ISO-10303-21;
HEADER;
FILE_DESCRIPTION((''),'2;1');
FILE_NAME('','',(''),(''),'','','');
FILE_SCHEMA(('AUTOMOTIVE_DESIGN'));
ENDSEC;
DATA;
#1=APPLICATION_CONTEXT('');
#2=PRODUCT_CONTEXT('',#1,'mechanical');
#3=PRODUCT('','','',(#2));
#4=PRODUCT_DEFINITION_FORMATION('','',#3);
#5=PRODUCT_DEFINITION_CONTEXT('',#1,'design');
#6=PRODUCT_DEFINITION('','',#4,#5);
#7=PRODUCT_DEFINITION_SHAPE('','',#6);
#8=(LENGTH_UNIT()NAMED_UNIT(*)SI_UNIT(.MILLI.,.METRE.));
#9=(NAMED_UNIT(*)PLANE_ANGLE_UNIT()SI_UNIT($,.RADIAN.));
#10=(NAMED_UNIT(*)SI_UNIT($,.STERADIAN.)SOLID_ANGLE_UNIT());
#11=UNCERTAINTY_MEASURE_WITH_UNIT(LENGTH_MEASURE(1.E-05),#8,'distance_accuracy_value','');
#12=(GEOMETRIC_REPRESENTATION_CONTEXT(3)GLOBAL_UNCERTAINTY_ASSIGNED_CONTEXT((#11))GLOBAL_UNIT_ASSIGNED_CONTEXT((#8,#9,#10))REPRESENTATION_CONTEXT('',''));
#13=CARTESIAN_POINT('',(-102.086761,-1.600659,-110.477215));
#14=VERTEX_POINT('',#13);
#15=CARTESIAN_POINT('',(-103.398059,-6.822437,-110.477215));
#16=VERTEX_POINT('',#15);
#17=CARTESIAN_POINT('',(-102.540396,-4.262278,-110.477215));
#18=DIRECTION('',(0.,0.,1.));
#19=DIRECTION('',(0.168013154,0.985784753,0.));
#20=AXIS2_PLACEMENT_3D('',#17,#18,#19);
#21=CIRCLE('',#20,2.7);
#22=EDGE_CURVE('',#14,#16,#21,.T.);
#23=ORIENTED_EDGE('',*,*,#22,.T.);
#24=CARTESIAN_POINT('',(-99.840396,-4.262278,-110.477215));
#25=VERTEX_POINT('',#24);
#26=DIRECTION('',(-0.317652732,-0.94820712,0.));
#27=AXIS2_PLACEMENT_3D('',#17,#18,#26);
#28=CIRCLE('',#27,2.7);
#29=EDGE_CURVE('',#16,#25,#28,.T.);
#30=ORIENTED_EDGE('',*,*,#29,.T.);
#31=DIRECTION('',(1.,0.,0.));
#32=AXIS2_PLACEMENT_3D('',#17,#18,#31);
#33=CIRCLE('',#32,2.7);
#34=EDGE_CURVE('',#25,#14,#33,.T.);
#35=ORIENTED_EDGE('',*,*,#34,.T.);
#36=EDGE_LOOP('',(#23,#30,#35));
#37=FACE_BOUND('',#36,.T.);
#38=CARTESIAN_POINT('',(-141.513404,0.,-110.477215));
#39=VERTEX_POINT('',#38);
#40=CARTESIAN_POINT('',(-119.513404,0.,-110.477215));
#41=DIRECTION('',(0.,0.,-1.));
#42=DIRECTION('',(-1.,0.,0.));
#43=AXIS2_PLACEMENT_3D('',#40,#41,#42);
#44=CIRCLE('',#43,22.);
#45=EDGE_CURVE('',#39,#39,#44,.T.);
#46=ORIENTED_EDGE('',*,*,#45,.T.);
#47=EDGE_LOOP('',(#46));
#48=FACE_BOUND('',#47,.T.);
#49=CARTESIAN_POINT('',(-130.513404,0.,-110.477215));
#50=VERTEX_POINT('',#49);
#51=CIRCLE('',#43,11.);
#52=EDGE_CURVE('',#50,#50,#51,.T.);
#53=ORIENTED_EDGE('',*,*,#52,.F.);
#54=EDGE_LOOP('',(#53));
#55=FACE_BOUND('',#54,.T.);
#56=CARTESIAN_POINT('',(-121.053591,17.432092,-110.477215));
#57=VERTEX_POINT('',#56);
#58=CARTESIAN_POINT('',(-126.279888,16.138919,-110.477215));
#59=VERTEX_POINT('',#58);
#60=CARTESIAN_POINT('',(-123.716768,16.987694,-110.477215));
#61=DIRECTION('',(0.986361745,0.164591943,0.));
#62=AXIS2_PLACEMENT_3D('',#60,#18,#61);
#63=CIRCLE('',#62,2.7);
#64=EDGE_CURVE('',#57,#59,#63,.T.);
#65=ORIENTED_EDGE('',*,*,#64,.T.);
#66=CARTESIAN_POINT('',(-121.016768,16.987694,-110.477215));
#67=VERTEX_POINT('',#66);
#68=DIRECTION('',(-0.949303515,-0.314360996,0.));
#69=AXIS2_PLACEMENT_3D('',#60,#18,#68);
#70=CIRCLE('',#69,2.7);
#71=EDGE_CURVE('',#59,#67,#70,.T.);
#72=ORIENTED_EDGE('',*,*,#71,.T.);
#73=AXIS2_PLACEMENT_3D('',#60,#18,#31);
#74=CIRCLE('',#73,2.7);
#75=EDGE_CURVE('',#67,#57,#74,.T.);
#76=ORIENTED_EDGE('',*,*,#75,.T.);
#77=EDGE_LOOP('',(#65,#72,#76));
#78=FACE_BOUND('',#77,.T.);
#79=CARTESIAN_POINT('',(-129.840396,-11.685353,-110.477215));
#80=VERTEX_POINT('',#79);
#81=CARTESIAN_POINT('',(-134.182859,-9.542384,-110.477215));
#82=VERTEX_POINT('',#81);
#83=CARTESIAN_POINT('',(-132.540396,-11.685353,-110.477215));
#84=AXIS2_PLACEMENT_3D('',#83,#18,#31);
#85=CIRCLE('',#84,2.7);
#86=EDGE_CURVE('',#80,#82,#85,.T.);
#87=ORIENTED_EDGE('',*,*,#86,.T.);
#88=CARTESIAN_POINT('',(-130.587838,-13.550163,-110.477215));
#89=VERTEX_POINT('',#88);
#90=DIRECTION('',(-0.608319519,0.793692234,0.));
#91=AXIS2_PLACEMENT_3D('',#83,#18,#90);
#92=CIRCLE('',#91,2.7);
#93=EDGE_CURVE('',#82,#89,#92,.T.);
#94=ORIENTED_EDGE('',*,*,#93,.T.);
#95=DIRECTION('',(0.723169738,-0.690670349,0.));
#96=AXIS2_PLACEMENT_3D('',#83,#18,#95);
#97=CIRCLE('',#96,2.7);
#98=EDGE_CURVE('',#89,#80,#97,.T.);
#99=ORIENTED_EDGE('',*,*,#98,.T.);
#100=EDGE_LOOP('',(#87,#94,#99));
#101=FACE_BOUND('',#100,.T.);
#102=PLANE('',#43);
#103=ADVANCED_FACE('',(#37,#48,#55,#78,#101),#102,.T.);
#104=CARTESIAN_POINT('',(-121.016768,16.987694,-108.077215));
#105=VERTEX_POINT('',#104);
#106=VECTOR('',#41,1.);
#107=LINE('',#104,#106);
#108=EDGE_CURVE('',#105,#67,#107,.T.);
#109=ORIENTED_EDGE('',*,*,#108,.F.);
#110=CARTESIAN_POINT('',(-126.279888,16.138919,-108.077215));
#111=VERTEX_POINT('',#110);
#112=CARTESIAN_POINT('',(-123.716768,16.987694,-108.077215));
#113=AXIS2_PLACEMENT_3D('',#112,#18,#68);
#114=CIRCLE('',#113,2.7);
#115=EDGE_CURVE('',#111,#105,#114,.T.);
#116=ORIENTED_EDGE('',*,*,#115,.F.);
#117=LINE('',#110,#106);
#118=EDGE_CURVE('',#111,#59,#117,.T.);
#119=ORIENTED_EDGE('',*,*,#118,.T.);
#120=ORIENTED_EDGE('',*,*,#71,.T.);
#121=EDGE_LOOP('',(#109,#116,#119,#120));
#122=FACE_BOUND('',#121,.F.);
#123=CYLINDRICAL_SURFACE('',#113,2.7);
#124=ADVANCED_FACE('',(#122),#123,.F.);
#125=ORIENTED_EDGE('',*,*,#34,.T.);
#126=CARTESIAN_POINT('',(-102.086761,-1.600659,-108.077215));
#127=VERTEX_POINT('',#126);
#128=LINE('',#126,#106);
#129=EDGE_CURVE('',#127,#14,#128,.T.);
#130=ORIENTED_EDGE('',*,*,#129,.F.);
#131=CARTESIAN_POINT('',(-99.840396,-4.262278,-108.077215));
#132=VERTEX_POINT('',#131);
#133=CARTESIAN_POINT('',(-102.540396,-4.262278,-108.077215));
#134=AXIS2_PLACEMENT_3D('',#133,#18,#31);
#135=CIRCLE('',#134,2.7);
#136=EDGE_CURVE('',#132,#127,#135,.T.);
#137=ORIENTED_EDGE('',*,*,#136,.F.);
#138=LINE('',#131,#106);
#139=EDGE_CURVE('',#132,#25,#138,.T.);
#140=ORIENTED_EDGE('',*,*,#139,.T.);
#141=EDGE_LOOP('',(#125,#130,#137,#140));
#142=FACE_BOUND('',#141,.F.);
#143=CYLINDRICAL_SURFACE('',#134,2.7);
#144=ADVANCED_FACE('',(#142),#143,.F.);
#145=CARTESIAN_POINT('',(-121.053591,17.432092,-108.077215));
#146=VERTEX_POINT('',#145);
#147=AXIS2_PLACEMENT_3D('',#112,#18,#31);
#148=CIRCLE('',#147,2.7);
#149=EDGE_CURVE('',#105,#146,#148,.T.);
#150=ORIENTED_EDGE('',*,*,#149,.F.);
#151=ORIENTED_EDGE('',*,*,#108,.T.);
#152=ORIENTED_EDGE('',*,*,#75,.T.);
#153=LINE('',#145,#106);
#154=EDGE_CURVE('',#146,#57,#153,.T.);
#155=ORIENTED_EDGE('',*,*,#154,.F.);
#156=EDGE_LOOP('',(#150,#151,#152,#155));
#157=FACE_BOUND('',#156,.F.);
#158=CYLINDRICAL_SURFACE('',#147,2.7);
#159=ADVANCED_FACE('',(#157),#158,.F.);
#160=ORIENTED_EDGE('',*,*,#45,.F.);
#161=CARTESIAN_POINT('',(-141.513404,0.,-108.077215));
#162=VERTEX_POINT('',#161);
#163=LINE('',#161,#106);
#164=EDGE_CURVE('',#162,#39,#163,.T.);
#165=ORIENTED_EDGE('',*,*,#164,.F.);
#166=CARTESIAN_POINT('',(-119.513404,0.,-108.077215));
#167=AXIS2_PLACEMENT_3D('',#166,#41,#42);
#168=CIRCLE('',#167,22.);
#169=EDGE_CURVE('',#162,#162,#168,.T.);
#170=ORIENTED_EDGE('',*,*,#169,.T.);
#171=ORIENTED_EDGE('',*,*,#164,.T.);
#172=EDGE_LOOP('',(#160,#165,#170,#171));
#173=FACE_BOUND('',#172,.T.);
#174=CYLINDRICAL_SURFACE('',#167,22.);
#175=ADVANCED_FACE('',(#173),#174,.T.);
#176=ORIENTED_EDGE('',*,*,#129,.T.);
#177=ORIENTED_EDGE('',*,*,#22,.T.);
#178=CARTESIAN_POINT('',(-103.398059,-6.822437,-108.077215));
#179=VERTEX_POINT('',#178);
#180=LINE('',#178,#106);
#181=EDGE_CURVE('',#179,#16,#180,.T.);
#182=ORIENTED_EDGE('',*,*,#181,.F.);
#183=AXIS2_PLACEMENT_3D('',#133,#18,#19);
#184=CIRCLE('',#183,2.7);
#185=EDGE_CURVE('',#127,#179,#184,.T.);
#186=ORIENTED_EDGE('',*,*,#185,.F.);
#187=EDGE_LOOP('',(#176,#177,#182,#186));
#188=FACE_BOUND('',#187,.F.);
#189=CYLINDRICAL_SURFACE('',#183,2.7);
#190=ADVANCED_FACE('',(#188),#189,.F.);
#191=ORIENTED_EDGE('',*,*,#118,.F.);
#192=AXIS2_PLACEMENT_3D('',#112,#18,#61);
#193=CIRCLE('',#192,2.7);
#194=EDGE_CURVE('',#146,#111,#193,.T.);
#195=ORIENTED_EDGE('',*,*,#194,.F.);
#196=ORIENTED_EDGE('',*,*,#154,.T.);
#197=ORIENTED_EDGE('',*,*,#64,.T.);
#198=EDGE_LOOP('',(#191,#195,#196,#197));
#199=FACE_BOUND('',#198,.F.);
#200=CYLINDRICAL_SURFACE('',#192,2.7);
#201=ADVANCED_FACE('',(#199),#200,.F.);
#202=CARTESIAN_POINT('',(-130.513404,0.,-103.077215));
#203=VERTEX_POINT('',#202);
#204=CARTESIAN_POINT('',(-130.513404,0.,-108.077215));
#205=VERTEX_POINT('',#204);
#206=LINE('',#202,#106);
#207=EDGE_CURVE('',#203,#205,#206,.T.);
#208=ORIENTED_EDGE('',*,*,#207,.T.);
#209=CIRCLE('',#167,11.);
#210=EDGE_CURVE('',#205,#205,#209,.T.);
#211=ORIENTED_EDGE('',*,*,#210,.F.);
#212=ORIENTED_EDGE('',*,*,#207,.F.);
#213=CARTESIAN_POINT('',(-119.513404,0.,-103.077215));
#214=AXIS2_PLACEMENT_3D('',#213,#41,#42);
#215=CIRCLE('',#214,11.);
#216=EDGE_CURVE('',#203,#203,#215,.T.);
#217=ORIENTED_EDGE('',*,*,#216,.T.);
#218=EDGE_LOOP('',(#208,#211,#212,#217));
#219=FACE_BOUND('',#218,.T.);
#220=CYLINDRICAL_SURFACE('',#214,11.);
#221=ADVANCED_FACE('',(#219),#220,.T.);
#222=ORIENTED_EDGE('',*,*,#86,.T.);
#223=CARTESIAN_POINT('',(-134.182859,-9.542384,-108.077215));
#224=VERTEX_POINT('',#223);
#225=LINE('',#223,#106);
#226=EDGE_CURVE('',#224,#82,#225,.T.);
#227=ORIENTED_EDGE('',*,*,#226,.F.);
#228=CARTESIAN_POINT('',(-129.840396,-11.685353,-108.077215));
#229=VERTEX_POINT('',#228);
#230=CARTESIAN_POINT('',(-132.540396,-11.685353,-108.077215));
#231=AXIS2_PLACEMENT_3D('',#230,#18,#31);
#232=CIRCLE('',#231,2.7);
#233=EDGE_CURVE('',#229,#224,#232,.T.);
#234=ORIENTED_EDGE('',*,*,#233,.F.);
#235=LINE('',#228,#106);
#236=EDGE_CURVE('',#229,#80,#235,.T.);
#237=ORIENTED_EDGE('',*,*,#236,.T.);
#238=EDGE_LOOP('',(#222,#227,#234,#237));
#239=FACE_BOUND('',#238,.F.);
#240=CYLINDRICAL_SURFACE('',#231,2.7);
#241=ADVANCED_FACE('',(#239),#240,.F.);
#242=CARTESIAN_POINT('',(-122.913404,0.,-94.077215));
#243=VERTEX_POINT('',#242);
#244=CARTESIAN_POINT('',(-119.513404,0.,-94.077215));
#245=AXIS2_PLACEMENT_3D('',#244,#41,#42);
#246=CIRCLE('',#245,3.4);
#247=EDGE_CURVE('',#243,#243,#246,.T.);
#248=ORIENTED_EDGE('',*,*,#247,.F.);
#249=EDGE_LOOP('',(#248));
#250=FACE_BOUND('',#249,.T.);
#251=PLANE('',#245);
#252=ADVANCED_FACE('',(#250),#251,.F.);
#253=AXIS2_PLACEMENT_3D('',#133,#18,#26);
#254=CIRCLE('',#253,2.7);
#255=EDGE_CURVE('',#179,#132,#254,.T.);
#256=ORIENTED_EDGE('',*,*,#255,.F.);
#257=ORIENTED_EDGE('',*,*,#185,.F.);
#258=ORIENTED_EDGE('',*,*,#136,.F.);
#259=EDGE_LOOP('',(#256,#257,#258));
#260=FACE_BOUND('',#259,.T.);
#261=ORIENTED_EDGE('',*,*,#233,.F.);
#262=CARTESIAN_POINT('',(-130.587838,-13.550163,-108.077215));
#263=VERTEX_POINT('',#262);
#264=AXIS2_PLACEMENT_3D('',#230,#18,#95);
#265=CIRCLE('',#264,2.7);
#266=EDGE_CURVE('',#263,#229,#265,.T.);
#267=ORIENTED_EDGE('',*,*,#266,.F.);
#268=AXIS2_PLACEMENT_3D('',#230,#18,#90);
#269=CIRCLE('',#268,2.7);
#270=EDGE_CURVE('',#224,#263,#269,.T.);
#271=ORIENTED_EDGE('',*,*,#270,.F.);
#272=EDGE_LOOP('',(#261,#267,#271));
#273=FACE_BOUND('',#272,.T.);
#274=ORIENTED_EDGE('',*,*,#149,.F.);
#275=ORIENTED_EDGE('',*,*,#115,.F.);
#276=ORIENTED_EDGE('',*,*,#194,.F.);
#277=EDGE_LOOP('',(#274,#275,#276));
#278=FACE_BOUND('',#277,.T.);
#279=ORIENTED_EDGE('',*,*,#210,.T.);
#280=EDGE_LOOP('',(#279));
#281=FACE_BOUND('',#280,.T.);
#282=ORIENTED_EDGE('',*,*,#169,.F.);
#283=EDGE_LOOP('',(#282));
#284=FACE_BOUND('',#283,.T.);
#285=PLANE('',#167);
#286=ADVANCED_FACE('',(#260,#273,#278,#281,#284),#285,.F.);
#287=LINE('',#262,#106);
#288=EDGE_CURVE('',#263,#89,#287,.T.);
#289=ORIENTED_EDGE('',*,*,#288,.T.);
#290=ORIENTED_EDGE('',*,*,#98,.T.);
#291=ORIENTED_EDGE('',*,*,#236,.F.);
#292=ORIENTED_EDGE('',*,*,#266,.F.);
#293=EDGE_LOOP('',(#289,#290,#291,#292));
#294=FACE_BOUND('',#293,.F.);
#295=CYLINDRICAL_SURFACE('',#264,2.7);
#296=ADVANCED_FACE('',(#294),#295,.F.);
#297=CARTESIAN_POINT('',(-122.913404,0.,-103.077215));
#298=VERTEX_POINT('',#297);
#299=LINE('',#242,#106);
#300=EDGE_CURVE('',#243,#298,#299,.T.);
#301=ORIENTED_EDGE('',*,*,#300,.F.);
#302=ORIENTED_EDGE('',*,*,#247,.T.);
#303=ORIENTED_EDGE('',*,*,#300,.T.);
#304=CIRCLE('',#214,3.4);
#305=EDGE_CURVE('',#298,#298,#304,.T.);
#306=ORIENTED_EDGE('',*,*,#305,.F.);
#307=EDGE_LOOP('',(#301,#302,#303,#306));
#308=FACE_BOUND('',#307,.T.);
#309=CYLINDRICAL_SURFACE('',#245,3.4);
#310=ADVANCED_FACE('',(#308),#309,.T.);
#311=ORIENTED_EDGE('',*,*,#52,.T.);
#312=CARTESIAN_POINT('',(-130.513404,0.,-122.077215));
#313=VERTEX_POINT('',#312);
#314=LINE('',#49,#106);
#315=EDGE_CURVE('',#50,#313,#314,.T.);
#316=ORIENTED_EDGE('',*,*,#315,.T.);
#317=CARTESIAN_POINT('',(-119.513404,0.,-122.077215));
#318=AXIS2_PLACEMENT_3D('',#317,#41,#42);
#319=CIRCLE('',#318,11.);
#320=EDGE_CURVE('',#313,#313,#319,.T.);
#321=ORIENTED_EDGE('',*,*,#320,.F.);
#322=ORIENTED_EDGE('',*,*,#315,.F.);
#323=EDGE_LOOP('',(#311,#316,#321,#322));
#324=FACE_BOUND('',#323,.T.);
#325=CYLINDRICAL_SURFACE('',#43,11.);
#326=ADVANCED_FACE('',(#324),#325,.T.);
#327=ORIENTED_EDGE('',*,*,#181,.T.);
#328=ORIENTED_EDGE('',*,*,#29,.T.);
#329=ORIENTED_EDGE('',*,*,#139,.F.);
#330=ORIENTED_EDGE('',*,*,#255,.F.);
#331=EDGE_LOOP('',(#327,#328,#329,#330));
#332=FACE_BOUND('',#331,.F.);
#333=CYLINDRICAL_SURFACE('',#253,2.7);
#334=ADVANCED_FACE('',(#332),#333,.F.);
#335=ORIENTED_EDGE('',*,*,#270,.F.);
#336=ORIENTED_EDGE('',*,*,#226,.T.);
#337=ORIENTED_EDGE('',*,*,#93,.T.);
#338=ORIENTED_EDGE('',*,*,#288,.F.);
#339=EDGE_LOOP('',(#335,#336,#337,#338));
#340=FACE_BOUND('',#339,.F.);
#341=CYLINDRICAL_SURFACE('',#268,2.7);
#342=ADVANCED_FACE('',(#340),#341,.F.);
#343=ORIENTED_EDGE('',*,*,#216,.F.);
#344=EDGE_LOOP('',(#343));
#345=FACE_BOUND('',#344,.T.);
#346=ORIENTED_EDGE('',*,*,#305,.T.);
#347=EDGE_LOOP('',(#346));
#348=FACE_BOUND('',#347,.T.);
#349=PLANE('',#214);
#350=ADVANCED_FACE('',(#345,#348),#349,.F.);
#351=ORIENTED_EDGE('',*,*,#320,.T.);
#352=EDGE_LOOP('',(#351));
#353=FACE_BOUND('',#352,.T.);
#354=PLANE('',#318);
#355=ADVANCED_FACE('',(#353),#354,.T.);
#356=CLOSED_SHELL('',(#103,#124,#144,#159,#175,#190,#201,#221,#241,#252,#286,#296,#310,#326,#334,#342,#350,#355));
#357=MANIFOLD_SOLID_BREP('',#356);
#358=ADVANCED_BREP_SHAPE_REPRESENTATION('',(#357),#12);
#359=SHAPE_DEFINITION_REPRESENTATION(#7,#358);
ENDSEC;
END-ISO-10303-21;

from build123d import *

# Parameters (mm, degrees)
F3_DEPTH = 2.4


with BuildPart() as f1:
    # F0 (on Front) → F1 (revolve)
    with BuildSketch(Plane.XZ):
        Polygon((-130.5134040415, -110.4772146098), (-130.5134040415, -122.0772146098), (-119.5134040415, -122.0772146098), (-119.5134040415, -94.0772146098), (-122.9134040415, -94.0772146098), (-122.9134040415, -103.0772146098), (-130.5134040415, -103.0772146098), (-130.5134040415, -108.0772146098), (-141.5134040415, -108.0772146098), (-141.5134040415, -110.4772146098), align=None)
    revolve(axis=Axis((-119.5134040415, 0, -108.0772146098), (0, 0, -1)))

    # F2 (on face) → F3 (cut, through all)
    with BuildSketch(Plane.XY.offset(-108.0772146098)):
        with BuildLine():
            ThreePointArc((-121.0167680789, 16.9876935094), (-121.0259896486, 17.2106541317), (-121.0535913671, 17.4320917564))
            ThreePointArc((-121.0535913671, 17.4320917564), (-123.7167680789, 16.9876935094), (-126.27988757, 16.1389188194))
            ThreePointArc((-126.27988757, 16.1389188194), (-123.2868975321, 14.3221332844), (-121.0167680789, 16.9876935094))
        make_face()
        with BuildLine():
            ThreePointArc((-126.27988757, 16.1389188194), (-123.7167680789, 16.9876935094), (-121.0535913671, 17.4320917564))
            ThreePointArc((-121.0535913671, 17.4320917564), (-124.3652871018, 19.6086519366), (-126.27988757, 16.1389188194))
        make_face()
        with BuildLine():
            ThreePointArc((-99.8403964321, -4.2622778759), (-100.4770477105, -2.5208439688), (-102.0867609158, -1.6006590418))
            ThreePointArc((-102.0867609158, -1.6006590418), (-102.5403964321, -4.2622778759), (-103.3980588072, -6.8224370996))
            ThreePointArc((-103.3980588072, -6.8224370996), (-100.9633245271, -6.4538171082), (-99.8403964321, -4.2622778759))
        make_face()
        with BuildLine():
            ThreePointArc((-103.3980588072, -6.8224370996), (-102.5403964321, -4.2622778759), (-102.0867609158, -1.6006590418))
            ThreePointArc((-102.0867609158, -1.6006590418), (-105.1590890347, -3.6046692894), (-103.3980588072, -6.8224370996))
        make_face()
        with BuildLine():
            ThreePointArc((-129.8403964321, -11.6853527655), (-131.3455427368, -9.2641289744), (-134.1828591335, -9.5423837329))
            ThreePointArc((-134.1828591335, -9.5423837329), (-132.5403964321, -11.6853527655), (-130.5878381405, -13.550162707))
            ThreePointArc((-130.5878381405, -13.550162707), (-130.0342133395, -12.6898657352), (-129.8403964321, -11.6853527655))
        make_face()
        with BuildLine():
            ThreePointArc((-130.5878381405, -13.550162707), (-132.5403964321, -11.6853527655), (-134.1828591335, -9.5423837329))
            ThreePointArc((-134.1828591335, -9.5423837329), (-134.5502752581, -13.4882357636), (-130.5878381405, -13.550162707))
        make_face()
    extrude(amount=-F3_DEPTH, mode=Mode.SUBTRACT)


solid = f1.part
